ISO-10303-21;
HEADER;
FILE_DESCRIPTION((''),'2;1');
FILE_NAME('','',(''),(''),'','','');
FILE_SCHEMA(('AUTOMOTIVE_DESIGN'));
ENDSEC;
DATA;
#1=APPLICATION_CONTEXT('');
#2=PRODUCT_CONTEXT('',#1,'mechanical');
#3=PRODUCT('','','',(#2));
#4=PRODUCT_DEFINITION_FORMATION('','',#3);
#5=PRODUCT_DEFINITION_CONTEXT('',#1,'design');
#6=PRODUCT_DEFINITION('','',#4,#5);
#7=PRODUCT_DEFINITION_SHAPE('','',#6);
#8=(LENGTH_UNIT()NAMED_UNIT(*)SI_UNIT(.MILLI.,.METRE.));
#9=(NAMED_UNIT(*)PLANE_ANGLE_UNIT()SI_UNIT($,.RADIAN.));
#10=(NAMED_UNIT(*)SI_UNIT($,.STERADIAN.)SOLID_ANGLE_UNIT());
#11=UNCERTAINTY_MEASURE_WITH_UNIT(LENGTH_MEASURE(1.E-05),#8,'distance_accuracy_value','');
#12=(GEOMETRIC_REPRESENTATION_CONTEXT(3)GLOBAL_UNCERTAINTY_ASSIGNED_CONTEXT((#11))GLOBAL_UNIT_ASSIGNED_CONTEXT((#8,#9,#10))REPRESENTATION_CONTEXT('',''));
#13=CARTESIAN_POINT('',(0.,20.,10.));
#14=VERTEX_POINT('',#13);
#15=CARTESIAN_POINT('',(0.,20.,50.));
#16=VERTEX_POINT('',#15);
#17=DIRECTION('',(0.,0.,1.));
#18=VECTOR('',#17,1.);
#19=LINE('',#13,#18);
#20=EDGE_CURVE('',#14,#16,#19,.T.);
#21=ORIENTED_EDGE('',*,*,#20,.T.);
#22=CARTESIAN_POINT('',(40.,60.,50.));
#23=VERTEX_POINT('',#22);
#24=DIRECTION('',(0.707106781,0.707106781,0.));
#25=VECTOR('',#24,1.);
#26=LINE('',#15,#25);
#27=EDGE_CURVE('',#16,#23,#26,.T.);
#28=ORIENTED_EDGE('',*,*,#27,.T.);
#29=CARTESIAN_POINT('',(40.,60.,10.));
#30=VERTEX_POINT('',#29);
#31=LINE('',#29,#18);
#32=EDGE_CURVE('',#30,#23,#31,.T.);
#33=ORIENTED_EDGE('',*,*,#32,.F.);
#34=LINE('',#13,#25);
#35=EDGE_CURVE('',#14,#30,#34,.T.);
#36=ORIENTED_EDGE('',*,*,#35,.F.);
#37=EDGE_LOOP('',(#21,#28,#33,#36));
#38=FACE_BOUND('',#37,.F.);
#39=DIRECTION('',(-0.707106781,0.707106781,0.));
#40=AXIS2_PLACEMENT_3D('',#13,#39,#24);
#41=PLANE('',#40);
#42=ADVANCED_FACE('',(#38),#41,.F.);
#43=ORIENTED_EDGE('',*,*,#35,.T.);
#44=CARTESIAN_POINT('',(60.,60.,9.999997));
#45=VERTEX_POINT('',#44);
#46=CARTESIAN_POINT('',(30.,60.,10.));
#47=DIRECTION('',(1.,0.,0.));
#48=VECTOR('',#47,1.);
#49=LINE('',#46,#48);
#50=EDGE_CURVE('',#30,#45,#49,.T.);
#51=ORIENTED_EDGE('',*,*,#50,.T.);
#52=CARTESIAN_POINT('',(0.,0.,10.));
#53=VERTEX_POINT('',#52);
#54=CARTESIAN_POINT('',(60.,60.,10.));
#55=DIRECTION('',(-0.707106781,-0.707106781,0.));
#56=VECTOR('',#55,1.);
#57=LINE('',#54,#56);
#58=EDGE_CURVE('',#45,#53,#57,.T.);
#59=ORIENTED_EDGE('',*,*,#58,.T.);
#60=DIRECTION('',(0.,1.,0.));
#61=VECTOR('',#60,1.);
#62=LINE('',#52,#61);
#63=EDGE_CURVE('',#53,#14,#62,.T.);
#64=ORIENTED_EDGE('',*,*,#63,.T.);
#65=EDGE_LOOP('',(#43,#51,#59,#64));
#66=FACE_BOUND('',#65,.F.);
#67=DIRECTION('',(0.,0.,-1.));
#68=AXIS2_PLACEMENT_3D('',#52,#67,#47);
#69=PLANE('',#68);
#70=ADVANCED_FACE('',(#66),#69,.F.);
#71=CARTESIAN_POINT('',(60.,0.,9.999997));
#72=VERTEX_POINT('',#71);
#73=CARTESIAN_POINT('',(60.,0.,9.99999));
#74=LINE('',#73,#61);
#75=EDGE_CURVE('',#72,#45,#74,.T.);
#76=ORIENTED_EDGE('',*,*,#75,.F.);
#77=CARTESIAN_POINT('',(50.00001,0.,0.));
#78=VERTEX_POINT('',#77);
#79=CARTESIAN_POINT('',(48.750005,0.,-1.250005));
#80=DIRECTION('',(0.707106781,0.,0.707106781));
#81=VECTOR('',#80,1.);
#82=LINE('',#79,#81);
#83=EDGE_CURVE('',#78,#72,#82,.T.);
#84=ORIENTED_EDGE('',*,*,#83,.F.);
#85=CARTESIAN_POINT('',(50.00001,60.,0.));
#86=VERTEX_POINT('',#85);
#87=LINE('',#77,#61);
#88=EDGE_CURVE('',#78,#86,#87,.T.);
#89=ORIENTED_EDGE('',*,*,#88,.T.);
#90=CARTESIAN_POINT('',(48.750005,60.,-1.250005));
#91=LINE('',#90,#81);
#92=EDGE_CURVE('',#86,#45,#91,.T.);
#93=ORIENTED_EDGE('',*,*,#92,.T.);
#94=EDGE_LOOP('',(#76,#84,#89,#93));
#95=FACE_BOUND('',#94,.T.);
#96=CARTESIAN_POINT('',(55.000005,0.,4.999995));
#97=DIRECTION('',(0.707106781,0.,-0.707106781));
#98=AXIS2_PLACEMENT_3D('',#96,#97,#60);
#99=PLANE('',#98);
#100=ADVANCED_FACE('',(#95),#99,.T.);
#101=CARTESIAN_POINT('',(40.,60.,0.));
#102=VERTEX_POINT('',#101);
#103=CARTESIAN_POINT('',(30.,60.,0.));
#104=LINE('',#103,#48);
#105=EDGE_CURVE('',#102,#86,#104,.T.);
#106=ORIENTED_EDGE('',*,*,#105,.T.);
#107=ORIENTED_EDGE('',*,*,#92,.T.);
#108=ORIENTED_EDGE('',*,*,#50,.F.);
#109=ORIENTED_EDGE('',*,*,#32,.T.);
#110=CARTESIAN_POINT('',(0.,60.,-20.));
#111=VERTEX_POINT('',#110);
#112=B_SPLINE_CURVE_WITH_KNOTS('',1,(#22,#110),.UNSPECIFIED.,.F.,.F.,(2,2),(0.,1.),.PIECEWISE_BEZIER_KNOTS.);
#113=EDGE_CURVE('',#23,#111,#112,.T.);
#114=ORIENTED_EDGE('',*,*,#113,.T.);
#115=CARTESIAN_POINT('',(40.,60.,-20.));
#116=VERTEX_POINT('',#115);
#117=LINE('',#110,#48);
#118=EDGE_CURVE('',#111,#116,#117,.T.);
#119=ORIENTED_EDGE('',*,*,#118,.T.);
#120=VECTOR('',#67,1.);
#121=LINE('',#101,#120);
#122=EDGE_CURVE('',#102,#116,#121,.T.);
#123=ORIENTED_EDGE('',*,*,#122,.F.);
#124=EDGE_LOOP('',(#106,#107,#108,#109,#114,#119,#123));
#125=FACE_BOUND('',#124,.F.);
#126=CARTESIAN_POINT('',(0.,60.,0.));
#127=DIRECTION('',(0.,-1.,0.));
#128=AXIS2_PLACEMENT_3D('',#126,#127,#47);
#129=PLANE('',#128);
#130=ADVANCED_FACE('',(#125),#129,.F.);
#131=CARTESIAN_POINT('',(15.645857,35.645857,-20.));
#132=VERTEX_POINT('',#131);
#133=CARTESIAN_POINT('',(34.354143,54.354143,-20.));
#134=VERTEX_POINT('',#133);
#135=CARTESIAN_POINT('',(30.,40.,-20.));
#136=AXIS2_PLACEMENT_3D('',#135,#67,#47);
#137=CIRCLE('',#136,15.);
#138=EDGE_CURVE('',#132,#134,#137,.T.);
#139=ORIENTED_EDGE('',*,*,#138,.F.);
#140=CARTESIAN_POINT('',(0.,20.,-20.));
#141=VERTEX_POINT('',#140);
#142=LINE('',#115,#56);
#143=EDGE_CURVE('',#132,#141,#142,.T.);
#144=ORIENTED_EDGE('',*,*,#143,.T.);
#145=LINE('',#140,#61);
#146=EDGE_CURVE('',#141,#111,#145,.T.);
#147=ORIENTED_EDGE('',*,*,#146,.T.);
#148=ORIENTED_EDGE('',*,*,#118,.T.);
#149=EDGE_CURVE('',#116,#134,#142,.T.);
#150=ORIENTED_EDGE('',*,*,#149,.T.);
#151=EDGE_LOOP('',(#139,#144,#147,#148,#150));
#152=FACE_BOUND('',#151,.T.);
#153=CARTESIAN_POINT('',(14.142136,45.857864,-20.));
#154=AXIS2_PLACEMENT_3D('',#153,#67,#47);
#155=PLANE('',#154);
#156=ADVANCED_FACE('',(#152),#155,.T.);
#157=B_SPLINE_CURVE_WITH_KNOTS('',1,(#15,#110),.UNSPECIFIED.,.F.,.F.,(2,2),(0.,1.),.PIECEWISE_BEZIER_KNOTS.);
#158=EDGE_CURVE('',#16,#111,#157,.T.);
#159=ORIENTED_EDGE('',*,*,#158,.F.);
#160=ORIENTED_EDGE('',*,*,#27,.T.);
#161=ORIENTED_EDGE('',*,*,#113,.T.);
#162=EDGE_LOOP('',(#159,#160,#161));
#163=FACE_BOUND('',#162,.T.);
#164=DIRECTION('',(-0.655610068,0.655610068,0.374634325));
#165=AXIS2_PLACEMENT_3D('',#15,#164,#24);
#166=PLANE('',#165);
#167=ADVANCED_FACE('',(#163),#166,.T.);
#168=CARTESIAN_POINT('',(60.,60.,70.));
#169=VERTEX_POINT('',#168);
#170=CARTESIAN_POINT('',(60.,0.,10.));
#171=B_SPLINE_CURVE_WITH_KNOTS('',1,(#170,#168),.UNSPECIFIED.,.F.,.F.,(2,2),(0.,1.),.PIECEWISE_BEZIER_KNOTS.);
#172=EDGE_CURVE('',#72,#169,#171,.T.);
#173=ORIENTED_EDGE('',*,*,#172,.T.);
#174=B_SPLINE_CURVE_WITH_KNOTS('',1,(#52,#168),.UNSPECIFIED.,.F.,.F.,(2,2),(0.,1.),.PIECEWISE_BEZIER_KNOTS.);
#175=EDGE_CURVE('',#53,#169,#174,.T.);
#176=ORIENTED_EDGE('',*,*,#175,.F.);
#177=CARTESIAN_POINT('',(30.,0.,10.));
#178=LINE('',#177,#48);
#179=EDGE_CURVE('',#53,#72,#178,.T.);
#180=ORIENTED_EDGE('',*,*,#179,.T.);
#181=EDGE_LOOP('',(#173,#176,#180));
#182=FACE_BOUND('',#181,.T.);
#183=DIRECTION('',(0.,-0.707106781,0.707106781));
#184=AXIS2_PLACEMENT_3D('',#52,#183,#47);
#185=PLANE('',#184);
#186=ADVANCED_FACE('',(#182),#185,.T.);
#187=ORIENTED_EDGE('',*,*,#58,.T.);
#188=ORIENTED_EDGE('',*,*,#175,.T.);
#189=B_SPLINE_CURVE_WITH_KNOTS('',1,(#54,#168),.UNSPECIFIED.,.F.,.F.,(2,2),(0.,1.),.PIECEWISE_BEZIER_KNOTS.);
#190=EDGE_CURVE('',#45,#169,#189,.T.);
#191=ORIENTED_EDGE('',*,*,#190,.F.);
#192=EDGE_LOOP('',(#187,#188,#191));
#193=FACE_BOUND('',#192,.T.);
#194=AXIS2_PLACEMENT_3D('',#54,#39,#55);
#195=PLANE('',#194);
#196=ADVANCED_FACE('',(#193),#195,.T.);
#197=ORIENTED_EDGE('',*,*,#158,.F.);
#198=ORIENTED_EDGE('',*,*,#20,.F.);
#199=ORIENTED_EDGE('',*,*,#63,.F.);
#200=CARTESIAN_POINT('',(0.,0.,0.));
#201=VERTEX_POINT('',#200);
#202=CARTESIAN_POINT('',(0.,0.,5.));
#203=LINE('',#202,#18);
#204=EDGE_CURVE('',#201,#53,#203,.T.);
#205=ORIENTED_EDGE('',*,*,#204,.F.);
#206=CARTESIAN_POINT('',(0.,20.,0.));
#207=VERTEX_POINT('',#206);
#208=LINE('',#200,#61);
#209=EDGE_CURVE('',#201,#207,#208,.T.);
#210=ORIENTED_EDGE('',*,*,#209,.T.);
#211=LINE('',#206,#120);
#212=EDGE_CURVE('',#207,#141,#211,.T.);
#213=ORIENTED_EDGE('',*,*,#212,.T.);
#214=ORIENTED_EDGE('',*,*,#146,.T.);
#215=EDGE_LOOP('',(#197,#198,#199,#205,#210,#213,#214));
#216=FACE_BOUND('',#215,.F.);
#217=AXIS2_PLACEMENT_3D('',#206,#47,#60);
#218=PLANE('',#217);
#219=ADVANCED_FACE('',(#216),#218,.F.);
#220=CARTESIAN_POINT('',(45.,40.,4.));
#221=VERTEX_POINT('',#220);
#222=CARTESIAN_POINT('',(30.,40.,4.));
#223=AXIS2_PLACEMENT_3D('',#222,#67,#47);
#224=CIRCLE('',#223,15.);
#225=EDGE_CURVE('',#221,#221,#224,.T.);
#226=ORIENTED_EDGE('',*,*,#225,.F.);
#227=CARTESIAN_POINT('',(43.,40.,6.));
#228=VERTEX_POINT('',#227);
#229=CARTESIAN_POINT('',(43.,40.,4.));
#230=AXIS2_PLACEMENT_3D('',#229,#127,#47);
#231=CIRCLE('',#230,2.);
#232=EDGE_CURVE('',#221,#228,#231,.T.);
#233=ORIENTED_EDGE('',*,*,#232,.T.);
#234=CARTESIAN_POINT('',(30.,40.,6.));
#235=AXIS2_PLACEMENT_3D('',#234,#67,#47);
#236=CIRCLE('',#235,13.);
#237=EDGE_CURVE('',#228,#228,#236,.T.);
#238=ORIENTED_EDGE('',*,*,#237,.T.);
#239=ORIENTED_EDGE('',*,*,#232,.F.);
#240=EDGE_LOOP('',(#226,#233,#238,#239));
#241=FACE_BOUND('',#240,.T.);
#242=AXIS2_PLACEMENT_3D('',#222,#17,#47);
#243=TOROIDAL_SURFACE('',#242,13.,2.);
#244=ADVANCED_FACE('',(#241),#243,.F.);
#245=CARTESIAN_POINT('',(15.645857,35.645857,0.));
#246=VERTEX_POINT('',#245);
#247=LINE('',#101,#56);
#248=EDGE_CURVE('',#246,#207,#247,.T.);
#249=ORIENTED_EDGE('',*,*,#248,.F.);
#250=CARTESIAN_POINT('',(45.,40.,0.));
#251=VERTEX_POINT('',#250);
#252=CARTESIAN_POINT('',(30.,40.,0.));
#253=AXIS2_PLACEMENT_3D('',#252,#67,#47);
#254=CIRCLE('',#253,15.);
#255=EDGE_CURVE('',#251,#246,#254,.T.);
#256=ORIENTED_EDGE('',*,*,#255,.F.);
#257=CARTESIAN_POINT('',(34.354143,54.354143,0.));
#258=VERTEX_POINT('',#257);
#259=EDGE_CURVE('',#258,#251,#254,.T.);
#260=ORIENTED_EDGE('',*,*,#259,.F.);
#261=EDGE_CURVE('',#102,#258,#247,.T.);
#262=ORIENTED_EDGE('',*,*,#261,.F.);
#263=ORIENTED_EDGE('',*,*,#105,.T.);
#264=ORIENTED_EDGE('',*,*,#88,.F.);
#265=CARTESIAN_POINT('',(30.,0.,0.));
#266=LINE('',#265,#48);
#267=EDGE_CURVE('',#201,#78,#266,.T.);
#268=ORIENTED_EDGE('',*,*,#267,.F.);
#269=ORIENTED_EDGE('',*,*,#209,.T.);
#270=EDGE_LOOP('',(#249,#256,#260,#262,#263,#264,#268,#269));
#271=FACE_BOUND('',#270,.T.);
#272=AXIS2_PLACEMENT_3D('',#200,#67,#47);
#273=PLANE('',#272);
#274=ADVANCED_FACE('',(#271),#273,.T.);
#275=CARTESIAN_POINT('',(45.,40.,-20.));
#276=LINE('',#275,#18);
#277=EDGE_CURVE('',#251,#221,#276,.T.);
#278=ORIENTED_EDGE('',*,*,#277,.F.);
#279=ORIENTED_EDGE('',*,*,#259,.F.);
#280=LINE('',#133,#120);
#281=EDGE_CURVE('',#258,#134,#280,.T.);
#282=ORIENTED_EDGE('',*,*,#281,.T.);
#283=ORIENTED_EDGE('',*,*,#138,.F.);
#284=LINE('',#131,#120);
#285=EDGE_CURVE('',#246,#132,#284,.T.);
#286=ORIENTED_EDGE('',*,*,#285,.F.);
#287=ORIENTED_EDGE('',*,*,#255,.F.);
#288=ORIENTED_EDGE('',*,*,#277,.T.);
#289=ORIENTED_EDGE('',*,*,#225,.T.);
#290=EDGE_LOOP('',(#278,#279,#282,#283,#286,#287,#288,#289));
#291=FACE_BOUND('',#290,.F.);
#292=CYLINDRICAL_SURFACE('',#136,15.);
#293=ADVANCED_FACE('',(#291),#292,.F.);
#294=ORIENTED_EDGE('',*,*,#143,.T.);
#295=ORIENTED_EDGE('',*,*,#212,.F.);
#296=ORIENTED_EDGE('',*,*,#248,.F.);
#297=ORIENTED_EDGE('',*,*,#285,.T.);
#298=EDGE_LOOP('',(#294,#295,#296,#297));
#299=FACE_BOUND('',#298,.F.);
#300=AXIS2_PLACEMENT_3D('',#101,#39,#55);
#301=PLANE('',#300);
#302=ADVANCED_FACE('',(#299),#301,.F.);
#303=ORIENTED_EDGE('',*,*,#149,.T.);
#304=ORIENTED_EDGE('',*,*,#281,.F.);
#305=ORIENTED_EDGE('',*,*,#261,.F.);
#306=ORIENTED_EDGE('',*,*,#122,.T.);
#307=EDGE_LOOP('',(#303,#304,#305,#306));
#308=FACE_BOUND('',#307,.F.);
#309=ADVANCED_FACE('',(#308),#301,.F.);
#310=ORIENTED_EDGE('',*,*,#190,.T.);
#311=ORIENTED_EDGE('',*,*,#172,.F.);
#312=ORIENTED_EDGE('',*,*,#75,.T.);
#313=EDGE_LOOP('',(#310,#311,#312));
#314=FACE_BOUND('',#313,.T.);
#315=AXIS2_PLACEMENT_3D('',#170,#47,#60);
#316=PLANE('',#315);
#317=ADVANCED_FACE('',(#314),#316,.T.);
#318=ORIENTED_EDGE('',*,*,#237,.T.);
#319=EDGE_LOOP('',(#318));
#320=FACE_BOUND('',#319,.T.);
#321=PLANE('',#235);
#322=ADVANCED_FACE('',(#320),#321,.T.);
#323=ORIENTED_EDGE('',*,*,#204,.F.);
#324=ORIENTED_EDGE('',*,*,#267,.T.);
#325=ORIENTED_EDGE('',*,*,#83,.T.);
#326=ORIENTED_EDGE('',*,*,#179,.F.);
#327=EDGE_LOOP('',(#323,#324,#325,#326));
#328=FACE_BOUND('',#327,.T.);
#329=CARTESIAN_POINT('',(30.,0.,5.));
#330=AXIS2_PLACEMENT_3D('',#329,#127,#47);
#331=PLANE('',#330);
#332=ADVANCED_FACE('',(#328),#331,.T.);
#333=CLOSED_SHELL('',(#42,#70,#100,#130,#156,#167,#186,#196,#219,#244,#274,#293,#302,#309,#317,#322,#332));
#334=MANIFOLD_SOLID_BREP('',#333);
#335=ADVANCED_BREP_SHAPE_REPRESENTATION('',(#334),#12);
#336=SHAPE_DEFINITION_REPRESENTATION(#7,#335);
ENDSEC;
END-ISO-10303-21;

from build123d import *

# Parameters (mm, degrees)
F0_W      = 60
F0_H      = 10
F1_DEPTH  = 60
F2_SIZE   = 9.99999
F9_DEPTH  = 40
F11_DEPTH = 20
F13_R     = 15
F14_DEPTH = 26
F15_R     = 2


# Not quite as in the source:
# - a fillet or chamfer is up to 0.001 mm smaller than in the source, because OpenCascade refuses the exact size


with BuildPart() as f1:
    # F0 (on Front) → F1 (new body)
    with BuildSketch(Plane.XZ):
        with Locations((30, 5)):
            Rectangle(F0_W, F0_H)
    extrude(amount=-F1_DEPTH)

    # F2 (size 10 in the source; OpenCascade refuses exactly that, so slightly less here)
    f2_edges = [f1.edges().sort_by_distance(p)[0] for p in [
        (60, 30, 0),
    ]]
    chamfer(f2_edges, length=F2_SIZE)

    # F5 (on face) → F6 section 0
    with BuildSketch(Plane.XY.offset(10), mode=Mode.PRIVATE) as f6_s0:
        Polygon((60, 0), (60, 60), (0, 0), align=None)
    loft([f6_s0.sketch, Vertex(60, 60, 70)])

    # F8 (on face) → F9 (join)
    with BuildSketch(Plane.XY.offset(10)):
        Polygon((40, 60), (0, 60), (0, 20), align=None)
    extrude(amount=F9_DEPTH)

    # F10 (on face) → F11 (join)
    with BuildSketch(Plane(origin=(0, 0, 0), x_dir=(1, 0, 0), z_dir=(0, 0, -1))):
        Polygon((0, -20), (0, -60), (40, -60), align=None)
    extrude(amount=F11_DEPTH)

    # F9_face (on face) → F12 section 0
    with BuildSketch(Plane(origin=(13.3333333333, 46.6666666667, 50), x_dir=(1, 0, 0), z_dir=(0, 0, 1)), mode=Mode.PRIVATE) as f12_s0:
        Polygon((26.6666666667, 13.3333333333), (-13.3333333333, 13.3333333333), (-13.3333333333, -26.6666666667), align=None)
    loft([f12_s0.sketch, Vertex(0, 60, -20)], mode=Mode.SUBTRACT)

    # F13 (on face) → F14 (cut)
    with BuildSketch(Plane(origin=(0, 0, -20), x_dir=(1, 0, 0), z_dir=(0, 0, -1))):
        with Locations((30, -40)):
            Circle(F13_R)
    extrude(amount=-F14_DEPTH, mode=Mode.SUBTRACT)

    # F15
    f15_edges = [f1.edges().sort_by_distance(p)[0] for p in [
        (15, 40, 6),
    ]]
    fillet(f15_edges, radius=F15_R)


solid = f1.part
